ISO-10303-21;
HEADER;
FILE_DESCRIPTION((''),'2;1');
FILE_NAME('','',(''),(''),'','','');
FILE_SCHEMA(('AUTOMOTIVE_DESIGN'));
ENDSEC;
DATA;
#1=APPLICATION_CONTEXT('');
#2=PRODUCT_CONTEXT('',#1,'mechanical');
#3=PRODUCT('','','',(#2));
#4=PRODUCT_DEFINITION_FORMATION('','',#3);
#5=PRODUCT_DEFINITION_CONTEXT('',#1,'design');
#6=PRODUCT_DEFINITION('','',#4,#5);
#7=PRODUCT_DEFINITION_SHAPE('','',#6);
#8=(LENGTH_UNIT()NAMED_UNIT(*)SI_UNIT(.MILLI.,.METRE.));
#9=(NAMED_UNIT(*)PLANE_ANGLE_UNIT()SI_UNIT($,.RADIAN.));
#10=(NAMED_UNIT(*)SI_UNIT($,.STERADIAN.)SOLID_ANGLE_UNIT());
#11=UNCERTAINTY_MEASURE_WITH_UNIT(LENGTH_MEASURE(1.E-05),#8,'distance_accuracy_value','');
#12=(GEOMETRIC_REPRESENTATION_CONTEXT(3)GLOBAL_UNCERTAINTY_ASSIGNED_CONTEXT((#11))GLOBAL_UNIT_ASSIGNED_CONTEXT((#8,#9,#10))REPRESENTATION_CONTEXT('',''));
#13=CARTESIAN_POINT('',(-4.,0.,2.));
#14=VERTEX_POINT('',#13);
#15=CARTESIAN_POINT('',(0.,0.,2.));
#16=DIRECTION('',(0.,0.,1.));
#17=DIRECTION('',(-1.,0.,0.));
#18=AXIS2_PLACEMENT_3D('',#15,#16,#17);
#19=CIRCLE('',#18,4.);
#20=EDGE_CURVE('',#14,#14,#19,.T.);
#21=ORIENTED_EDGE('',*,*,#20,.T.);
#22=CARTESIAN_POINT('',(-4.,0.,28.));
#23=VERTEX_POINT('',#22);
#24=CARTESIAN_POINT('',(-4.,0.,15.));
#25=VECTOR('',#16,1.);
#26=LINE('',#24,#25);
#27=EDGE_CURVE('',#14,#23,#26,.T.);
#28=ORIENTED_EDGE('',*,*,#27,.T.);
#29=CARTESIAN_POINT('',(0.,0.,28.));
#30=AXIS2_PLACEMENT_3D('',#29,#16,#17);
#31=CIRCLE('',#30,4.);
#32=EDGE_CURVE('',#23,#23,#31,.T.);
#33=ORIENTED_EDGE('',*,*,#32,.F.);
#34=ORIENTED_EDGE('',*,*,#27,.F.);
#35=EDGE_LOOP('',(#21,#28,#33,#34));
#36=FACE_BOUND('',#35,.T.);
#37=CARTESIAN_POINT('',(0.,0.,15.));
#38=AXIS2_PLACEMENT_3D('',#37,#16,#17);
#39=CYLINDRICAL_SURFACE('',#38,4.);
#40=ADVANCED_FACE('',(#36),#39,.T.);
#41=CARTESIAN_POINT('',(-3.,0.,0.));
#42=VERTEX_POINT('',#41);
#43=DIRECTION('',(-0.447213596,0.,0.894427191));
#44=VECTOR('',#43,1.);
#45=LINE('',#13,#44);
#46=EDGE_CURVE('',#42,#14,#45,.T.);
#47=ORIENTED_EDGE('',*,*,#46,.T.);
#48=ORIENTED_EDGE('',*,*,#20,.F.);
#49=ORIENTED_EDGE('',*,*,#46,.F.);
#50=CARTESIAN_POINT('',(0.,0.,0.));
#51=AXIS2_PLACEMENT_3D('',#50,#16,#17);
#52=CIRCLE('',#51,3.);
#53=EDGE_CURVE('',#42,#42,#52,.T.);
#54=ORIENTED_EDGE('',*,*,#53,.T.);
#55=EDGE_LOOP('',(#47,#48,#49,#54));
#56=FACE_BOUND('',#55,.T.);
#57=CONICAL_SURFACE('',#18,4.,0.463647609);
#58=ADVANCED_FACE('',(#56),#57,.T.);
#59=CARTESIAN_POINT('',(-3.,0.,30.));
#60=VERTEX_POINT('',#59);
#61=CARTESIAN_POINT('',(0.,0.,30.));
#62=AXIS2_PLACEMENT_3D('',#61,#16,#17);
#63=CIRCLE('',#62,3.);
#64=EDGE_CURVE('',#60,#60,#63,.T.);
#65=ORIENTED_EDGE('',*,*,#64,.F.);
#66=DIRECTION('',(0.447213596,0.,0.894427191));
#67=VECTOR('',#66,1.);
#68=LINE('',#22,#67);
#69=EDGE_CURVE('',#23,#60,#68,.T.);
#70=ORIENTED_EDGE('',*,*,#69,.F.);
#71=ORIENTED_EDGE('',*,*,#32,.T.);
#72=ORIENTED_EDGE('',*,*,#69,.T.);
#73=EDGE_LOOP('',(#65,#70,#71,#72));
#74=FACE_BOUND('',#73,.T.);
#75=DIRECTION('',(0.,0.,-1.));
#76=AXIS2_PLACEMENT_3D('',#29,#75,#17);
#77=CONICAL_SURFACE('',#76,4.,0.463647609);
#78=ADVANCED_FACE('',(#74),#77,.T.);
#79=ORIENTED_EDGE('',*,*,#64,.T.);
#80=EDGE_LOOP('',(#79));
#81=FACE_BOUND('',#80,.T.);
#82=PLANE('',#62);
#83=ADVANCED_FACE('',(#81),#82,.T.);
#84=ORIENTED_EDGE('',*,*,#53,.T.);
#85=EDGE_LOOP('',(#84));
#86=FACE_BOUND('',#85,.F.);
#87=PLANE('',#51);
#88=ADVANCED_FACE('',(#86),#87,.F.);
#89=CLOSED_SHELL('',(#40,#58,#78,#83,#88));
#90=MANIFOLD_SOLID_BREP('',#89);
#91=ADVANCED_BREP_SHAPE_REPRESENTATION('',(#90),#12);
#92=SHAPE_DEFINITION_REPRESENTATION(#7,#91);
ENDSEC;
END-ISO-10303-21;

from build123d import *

# Parameters (mm, degrees)
F0_W        = 4
F0_H        = 30
F2_C1_SIZE2 = 2
F2_C1_SIZE  = 1
F2_C2_SIZE2 = 1
F2_C2_SIZE  = 2


# Not quite as in the source:
# - two fillets or chamfers of one size are made in one step


with BuildPart() as f1:
    # F0 (on Front) → F1 (revolve)
    with BuildSketch(Plane.XZ):
        with Locations((-2, 15)):
            Rectangle(F0_W, F0_H)
    revolve(axis=Axis((0, 0, 22.5), (0, 0, 1)))

    # F2: chamfer of 2 x 1 on 2 edges, made by hand

    # F2_c1
    f2_c1_edges = [f1.edges().sort_by_distance(p)[0] for p in [
        (4, 0, 0),
    ]]
    f2_c1_side = f1.faces().sort_by_distance((3.98, 0, 0))[0]
    chamfer(f2_c1_edges, length=F2_C1_SIZE, length2=F2_C1_SIZE2, reference=f2_c1_side)

    # F2_c2
    f2_c2_edges = [f1.edges().sort_by_distance(p)[0] for p in [
        (4, 0, 30),
    ]]
    f2_c2_side = f1.faces().sort_by_distance((4, 0, 29.98))[0]
    chamfer(f2_c2_edges, length=F2_C2_SIZE, length2=F2_C2_SIZE2, reference=f2_c2_side)


solid = f1.part
